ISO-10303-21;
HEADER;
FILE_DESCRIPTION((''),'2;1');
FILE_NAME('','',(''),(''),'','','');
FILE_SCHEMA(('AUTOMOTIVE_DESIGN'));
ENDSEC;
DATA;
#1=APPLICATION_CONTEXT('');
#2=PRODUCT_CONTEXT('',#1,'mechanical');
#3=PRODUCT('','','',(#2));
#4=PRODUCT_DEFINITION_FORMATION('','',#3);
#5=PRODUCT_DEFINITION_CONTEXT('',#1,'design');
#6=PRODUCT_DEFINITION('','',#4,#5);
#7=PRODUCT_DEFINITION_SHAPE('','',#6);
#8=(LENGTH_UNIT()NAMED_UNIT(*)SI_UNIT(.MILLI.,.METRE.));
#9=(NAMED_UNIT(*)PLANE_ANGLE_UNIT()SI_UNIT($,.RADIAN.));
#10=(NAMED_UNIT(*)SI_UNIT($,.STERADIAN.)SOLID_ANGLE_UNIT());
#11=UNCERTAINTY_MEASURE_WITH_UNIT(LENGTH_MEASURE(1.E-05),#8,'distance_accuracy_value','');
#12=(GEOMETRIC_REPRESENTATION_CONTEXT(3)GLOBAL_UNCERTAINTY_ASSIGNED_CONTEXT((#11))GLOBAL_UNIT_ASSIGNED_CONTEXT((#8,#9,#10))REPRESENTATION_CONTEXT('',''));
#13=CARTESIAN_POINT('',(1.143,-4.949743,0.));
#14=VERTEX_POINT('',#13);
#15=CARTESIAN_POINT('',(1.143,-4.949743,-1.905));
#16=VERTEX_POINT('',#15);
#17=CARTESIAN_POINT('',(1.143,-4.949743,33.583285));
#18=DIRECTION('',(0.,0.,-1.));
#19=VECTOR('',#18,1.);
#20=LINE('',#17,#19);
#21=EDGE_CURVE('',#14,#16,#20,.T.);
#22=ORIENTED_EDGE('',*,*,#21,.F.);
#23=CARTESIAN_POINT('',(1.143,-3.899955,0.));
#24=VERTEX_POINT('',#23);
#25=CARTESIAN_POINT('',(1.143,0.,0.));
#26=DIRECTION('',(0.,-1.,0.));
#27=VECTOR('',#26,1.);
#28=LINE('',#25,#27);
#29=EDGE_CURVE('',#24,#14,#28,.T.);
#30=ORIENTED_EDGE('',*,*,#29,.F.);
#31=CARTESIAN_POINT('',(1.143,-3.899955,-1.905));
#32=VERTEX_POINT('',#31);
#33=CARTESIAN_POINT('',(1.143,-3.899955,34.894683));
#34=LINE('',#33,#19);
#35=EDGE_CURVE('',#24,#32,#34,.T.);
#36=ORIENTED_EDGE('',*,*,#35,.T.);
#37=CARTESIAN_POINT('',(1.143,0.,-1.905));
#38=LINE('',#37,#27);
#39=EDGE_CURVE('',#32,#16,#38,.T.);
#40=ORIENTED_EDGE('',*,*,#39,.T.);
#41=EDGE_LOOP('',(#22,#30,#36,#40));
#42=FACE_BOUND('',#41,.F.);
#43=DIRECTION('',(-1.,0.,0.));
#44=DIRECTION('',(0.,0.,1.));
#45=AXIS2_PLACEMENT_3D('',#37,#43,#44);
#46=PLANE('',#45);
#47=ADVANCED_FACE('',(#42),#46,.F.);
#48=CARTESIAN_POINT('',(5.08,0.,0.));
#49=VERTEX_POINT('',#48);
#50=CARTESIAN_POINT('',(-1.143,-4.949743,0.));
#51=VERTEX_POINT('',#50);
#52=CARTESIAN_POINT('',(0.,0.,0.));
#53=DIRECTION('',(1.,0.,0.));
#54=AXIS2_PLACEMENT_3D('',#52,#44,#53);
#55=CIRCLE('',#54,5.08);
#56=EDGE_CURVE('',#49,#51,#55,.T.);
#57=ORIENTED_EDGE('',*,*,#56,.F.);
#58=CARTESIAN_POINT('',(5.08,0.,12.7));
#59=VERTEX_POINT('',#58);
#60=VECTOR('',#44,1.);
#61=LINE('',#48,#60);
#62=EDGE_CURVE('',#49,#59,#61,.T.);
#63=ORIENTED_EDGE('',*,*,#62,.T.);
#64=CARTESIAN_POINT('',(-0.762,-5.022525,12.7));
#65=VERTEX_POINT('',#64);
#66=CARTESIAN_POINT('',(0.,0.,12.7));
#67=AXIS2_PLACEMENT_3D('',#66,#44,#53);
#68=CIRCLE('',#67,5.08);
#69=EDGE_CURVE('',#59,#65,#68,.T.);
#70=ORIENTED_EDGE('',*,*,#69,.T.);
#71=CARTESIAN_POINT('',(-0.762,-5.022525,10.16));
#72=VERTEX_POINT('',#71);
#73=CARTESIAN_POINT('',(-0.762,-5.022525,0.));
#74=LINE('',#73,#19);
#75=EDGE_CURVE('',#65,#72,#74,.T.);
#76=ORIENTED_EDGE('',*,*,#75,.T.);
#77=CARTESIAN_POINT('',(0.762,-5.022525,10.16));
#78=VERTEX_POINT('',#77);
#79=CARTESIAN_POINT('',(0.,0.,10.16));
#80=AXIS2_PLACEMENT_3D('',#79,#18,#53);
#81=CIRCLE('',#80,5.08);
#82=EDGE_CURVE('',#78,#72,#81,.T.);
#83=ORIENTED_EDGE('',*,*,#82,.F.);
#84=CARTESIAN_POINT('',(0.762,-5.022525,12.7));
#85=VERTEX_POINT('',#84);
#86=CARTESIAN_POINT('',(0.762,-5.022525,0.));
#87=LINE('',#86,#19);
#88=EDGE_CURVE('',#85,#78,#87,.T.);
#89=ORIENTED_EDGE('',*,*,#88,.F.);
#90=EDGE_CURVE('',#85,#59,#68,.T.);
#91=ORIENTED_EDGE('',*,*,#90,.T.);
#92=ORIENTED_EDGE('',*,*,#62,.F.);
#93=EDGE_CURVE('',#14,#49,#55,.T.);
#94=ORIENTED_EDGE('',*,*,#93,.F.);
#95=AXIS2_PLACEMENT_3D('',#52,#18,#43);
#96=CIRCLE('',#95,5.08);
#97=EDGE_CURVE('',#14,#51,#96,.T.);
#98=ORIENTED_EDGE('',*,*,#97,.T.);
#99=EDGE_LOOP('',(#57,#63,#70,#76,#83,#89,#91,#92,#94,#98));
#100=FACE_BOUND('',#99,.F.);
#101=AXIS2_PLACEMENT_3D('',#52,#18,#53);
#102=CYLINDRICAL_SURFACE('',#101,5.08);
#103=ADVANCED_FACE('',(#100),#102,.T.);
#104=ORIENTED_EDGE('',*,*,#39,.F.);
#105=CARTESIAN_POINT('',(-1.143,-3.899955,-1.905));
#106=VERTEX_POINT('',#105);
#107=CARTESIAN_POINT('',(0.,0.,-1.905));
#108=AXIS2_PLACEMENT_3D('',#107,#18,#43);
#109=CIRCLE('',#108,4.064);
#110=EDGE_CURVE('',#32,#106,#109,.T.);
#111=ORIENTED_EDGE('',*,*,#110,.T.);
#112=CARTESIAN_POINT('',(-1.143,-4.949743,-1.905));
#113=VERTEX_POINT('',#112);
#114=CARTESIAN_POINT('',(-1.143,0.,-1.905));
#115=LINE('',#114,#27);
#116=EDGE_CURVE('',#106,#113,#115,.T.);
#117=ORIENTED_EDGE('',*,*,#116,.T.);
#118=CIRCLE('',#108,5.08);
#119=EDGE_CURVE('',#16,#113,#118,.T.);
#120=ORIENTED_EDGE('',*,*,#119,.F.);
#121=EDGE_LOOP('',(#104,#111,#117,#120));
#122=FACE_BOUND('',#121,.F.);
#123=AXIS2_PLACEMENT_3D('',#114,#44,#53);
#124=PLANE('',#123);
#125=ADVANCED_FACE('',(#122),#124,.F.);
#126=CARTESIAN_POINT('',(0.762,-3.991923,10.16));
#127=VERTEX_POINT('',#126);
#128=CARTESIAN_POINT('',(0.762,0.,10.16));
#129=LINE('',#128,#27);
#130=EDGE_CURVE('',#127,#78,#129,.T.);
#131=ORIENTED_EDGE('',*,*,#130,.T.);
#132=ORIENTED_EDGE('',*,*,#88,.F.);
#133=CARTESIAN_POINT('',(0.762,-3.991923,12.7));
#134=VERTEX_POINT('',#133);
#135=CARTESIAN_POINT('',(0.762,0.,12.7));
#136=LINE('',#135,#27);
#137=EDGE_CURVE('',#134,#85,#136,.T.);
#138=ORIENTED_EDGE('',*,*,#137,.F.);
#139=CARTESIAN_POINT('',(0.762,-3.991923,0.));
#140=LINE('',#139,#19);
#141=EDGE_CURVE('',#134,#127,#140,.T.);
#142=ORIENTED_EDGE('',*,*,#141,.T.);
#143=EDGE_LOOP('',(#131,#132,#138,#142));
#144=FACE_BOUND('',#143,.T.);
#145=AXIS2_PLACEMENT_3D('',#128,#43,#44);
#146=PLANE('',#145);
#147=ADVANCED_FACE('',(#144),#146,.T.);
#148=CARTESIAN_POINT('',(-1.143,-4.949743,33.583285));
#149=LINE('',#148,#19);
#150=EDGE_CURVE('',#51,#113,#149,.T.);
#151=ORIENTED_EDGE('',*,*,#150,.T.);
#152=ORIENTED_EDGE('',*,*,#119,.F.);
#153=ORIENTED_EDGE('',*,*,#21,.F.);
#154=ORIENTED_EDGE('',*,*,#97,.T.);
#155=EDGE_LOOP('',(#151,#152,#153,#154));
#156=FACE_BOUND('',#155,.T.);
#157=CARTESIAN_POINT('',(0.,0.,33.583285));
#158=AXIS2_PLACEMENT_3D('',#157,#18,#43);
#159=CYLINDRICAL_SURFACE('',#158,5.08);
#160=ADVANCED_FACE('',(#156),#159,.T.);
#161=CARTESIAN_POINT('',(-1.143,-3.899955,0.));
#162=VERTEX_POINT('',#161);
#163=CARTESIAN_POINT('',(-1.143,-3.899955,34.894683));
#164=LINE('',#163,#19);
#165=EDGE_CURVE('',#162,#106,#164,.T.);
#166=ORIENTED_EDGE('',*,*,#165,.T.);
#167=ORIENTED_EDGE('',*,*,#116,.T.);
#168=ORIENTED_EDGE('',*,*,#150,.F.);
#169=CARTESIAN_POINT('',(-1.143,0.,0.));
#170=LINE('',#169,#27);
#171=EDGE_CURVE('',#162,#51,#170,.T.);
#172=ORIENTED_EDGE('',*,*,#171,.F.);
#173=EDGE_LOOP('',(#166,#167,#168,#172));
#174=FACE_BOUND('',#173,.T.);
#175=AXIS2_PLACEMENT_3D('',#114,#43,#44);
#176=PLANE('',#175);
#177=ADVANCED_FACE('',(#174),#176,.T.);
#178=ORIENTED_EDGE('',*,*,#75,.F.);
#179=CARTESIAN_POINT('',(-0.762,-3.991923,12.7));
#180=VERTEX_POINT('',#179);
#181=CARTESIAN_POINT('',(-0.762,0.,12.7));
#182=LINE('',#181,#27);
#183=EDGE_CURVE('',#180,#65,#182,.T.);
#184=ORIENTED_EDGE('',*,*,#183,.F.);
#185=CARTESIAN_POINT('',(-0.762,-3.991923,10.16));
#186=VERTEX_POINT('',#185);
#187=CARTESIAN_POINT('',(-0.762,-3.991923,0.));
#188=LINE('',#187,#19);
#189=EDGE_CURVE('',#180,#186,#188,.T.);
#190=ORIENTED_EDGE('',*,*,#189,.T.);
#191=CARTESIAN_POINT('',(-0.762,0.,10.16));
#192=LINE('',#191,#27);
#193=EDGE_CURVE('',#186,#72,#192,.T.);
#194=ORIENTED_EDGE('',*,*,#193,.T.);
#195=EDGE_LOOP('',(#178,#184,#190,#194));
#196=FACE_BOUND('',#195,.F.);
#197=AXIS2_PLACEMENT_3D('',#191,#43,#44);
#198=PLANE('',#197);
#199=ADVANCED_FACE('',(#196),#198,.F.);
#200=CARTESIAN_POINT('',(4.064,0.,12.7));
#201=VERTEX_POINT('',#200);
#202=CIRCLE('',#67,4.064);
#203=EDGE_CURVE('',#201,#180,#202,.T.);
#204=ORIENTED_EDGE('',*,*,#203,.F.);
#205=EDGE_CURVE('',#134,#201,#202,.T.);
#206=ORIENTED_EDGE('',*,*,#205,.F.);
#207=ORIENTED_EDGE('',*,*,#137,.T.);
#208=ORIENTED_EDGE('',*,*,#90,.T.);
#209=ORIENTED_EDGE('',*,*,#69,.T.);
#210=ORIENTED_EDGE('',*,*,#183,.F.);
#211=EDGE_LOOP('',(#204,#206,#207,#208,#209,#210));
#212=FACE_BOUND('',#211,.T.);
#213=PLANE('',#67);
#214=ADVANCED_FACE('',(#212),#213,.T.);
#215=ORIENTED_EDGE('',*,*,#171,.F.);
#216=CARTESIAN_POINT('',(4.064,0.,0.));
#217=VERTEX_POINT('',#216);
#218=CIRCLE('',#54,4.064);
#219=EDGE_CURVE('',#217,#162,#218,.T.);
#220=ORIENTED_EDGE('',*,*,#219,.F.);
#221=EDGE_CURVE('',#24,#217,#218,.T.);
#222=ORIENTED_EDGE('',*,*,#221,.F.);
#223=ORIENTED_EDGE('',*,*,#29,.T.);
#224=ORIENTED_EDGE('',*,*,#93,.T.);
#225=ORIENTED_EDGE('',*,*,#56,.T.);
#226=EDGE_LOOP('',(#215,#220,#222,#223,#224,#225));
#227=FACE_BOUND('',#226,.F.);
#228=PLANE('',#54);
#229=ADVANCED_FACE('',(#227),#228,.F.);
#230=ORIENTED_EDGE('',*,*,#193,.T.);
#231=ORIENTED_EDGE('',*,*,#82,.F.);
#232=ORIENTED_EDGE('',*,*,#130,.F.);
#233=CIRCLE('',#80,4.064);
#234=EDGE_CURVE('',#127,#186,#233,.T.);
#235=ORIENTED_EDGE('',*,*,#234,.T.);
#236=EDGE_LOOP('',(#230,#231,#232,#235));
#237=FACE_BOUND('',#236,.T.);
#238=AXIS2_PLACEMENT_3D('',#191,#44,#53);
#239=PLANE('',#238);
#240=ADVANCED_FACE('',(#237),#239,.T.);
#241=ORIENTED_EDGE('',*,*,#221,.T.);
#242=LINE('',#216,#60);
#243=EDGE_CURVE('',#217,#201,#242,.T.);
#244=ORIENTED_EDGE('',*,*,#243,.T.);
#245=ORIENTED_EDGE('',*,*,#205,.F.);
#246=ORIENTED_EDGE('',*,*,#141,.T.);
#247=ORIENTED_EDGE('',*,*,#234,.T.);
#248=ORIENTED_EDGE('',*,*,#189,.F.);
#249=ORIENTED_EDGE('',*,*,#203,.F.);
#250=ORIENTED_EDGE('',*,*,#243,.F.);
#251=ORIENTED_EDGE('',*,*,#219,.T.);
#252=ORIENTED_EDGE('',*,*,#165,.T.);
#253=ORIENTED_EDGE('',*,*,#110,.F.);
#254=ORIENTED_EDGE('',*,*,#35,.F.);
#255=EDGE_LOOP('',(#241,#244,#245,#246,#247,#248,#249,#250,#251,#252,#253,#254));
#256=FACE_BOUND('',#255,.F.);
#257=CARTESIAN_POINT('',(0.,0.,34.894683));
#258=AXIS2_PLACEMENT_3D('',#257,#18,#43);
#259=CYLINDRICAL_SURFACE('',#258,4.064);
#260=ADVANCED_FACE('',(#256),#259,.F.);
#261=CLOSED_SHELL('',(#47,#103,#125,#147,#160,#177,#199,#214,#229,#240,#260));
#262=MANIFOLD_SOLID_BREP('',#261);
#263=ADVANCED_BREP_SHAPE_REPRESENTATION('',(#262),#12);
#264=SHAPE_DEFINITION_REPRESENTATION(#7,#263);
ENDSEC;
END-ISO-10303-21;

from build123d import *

# Parameters (mm, degrees)
F0_R          = 5.08
F0_R_2        = 4.064
F1_DEPTH      = 12.7
F2_W          = 1.524
F2_H          = 2.54
F3_DEPTH      = 25.4
F5_END_RADIUS = 5.08
F4_W          = 2.286
F4_H          = 1.905
F5_REACH      = 8.0567051265
F6_END_RADIUS = 4.064
F6_REACH      = 8.0567051265


with BuildPart() as f1:
    # F0 (on Top) → F1 (new body)
    with BuildSketch(Plane.XY):
        Circle(F0_R)
        Circle(F0_R_2, mode=Mode.SUBTRACT)
    extrude(amount=F1_DEPTH)

    # F2 (on Front) → F3 (cut)
    with BuildSketch(Plane.XZ):
        with Locations((0, 11.43)):
            Rectangle(F2_W, F2_H)
    extrude(amount=F3_DEPTH, mode=Mode.SUBTRACT)

    f5_end = (Plane(origin=(0, 0, 6.35), x_dir=(-1, 0, 0), z_dir=(0, 0, -1)) * Cylinder(F5_END_RADIUS, 54.4665691842, mode=Mode.PRIVATE)).faces().sort_by_distance((-5.08, 0, 6.35))[0]
    # F4 (on Front) → F5 (join, up to the whole of a round face its end follows)
    with BuildSketch(Plane.XZ):
        with Locations((0, -0.9525)):
            Rectangle(F4_W, F4_H)
    f5_long = extrude(amount=F5_REACH, mode=Mode.PRIVATE)
    add(split(f5_long, bisect_by=f5_end, keep=Keep.BOTTOM, mode=Mode.PRIVATE))

    f6_end = (Plane(origin=(0, 0, 6.35), x_dir=(-1, 0, 0), z_dir=(0, 0, -1)) * Cylinder(F6_END_RADIUS, 57.0893653975, mode=Mode.PRIVATE)).faces().sort_by_distance((-4.064, 0, 6.35))[0]
    # F4 (on Front) → F6 (cut, up to the whole of a round face its end follows)
    with BuildSketch(Plane.XZ):
        with Locations((0, -0.9525)):
            Rectangle(F4_W, F4_H)
    f6_long = extrude(amount=F6_REACH, mode=Mode.PRIVATE)
    add(split(f6_long, bisect_by=f6_end, keep=Keep.BOTTOM, mode=Mode.PRIVATE), mode=Mode.SUBTRACT)


solid = f1.part
